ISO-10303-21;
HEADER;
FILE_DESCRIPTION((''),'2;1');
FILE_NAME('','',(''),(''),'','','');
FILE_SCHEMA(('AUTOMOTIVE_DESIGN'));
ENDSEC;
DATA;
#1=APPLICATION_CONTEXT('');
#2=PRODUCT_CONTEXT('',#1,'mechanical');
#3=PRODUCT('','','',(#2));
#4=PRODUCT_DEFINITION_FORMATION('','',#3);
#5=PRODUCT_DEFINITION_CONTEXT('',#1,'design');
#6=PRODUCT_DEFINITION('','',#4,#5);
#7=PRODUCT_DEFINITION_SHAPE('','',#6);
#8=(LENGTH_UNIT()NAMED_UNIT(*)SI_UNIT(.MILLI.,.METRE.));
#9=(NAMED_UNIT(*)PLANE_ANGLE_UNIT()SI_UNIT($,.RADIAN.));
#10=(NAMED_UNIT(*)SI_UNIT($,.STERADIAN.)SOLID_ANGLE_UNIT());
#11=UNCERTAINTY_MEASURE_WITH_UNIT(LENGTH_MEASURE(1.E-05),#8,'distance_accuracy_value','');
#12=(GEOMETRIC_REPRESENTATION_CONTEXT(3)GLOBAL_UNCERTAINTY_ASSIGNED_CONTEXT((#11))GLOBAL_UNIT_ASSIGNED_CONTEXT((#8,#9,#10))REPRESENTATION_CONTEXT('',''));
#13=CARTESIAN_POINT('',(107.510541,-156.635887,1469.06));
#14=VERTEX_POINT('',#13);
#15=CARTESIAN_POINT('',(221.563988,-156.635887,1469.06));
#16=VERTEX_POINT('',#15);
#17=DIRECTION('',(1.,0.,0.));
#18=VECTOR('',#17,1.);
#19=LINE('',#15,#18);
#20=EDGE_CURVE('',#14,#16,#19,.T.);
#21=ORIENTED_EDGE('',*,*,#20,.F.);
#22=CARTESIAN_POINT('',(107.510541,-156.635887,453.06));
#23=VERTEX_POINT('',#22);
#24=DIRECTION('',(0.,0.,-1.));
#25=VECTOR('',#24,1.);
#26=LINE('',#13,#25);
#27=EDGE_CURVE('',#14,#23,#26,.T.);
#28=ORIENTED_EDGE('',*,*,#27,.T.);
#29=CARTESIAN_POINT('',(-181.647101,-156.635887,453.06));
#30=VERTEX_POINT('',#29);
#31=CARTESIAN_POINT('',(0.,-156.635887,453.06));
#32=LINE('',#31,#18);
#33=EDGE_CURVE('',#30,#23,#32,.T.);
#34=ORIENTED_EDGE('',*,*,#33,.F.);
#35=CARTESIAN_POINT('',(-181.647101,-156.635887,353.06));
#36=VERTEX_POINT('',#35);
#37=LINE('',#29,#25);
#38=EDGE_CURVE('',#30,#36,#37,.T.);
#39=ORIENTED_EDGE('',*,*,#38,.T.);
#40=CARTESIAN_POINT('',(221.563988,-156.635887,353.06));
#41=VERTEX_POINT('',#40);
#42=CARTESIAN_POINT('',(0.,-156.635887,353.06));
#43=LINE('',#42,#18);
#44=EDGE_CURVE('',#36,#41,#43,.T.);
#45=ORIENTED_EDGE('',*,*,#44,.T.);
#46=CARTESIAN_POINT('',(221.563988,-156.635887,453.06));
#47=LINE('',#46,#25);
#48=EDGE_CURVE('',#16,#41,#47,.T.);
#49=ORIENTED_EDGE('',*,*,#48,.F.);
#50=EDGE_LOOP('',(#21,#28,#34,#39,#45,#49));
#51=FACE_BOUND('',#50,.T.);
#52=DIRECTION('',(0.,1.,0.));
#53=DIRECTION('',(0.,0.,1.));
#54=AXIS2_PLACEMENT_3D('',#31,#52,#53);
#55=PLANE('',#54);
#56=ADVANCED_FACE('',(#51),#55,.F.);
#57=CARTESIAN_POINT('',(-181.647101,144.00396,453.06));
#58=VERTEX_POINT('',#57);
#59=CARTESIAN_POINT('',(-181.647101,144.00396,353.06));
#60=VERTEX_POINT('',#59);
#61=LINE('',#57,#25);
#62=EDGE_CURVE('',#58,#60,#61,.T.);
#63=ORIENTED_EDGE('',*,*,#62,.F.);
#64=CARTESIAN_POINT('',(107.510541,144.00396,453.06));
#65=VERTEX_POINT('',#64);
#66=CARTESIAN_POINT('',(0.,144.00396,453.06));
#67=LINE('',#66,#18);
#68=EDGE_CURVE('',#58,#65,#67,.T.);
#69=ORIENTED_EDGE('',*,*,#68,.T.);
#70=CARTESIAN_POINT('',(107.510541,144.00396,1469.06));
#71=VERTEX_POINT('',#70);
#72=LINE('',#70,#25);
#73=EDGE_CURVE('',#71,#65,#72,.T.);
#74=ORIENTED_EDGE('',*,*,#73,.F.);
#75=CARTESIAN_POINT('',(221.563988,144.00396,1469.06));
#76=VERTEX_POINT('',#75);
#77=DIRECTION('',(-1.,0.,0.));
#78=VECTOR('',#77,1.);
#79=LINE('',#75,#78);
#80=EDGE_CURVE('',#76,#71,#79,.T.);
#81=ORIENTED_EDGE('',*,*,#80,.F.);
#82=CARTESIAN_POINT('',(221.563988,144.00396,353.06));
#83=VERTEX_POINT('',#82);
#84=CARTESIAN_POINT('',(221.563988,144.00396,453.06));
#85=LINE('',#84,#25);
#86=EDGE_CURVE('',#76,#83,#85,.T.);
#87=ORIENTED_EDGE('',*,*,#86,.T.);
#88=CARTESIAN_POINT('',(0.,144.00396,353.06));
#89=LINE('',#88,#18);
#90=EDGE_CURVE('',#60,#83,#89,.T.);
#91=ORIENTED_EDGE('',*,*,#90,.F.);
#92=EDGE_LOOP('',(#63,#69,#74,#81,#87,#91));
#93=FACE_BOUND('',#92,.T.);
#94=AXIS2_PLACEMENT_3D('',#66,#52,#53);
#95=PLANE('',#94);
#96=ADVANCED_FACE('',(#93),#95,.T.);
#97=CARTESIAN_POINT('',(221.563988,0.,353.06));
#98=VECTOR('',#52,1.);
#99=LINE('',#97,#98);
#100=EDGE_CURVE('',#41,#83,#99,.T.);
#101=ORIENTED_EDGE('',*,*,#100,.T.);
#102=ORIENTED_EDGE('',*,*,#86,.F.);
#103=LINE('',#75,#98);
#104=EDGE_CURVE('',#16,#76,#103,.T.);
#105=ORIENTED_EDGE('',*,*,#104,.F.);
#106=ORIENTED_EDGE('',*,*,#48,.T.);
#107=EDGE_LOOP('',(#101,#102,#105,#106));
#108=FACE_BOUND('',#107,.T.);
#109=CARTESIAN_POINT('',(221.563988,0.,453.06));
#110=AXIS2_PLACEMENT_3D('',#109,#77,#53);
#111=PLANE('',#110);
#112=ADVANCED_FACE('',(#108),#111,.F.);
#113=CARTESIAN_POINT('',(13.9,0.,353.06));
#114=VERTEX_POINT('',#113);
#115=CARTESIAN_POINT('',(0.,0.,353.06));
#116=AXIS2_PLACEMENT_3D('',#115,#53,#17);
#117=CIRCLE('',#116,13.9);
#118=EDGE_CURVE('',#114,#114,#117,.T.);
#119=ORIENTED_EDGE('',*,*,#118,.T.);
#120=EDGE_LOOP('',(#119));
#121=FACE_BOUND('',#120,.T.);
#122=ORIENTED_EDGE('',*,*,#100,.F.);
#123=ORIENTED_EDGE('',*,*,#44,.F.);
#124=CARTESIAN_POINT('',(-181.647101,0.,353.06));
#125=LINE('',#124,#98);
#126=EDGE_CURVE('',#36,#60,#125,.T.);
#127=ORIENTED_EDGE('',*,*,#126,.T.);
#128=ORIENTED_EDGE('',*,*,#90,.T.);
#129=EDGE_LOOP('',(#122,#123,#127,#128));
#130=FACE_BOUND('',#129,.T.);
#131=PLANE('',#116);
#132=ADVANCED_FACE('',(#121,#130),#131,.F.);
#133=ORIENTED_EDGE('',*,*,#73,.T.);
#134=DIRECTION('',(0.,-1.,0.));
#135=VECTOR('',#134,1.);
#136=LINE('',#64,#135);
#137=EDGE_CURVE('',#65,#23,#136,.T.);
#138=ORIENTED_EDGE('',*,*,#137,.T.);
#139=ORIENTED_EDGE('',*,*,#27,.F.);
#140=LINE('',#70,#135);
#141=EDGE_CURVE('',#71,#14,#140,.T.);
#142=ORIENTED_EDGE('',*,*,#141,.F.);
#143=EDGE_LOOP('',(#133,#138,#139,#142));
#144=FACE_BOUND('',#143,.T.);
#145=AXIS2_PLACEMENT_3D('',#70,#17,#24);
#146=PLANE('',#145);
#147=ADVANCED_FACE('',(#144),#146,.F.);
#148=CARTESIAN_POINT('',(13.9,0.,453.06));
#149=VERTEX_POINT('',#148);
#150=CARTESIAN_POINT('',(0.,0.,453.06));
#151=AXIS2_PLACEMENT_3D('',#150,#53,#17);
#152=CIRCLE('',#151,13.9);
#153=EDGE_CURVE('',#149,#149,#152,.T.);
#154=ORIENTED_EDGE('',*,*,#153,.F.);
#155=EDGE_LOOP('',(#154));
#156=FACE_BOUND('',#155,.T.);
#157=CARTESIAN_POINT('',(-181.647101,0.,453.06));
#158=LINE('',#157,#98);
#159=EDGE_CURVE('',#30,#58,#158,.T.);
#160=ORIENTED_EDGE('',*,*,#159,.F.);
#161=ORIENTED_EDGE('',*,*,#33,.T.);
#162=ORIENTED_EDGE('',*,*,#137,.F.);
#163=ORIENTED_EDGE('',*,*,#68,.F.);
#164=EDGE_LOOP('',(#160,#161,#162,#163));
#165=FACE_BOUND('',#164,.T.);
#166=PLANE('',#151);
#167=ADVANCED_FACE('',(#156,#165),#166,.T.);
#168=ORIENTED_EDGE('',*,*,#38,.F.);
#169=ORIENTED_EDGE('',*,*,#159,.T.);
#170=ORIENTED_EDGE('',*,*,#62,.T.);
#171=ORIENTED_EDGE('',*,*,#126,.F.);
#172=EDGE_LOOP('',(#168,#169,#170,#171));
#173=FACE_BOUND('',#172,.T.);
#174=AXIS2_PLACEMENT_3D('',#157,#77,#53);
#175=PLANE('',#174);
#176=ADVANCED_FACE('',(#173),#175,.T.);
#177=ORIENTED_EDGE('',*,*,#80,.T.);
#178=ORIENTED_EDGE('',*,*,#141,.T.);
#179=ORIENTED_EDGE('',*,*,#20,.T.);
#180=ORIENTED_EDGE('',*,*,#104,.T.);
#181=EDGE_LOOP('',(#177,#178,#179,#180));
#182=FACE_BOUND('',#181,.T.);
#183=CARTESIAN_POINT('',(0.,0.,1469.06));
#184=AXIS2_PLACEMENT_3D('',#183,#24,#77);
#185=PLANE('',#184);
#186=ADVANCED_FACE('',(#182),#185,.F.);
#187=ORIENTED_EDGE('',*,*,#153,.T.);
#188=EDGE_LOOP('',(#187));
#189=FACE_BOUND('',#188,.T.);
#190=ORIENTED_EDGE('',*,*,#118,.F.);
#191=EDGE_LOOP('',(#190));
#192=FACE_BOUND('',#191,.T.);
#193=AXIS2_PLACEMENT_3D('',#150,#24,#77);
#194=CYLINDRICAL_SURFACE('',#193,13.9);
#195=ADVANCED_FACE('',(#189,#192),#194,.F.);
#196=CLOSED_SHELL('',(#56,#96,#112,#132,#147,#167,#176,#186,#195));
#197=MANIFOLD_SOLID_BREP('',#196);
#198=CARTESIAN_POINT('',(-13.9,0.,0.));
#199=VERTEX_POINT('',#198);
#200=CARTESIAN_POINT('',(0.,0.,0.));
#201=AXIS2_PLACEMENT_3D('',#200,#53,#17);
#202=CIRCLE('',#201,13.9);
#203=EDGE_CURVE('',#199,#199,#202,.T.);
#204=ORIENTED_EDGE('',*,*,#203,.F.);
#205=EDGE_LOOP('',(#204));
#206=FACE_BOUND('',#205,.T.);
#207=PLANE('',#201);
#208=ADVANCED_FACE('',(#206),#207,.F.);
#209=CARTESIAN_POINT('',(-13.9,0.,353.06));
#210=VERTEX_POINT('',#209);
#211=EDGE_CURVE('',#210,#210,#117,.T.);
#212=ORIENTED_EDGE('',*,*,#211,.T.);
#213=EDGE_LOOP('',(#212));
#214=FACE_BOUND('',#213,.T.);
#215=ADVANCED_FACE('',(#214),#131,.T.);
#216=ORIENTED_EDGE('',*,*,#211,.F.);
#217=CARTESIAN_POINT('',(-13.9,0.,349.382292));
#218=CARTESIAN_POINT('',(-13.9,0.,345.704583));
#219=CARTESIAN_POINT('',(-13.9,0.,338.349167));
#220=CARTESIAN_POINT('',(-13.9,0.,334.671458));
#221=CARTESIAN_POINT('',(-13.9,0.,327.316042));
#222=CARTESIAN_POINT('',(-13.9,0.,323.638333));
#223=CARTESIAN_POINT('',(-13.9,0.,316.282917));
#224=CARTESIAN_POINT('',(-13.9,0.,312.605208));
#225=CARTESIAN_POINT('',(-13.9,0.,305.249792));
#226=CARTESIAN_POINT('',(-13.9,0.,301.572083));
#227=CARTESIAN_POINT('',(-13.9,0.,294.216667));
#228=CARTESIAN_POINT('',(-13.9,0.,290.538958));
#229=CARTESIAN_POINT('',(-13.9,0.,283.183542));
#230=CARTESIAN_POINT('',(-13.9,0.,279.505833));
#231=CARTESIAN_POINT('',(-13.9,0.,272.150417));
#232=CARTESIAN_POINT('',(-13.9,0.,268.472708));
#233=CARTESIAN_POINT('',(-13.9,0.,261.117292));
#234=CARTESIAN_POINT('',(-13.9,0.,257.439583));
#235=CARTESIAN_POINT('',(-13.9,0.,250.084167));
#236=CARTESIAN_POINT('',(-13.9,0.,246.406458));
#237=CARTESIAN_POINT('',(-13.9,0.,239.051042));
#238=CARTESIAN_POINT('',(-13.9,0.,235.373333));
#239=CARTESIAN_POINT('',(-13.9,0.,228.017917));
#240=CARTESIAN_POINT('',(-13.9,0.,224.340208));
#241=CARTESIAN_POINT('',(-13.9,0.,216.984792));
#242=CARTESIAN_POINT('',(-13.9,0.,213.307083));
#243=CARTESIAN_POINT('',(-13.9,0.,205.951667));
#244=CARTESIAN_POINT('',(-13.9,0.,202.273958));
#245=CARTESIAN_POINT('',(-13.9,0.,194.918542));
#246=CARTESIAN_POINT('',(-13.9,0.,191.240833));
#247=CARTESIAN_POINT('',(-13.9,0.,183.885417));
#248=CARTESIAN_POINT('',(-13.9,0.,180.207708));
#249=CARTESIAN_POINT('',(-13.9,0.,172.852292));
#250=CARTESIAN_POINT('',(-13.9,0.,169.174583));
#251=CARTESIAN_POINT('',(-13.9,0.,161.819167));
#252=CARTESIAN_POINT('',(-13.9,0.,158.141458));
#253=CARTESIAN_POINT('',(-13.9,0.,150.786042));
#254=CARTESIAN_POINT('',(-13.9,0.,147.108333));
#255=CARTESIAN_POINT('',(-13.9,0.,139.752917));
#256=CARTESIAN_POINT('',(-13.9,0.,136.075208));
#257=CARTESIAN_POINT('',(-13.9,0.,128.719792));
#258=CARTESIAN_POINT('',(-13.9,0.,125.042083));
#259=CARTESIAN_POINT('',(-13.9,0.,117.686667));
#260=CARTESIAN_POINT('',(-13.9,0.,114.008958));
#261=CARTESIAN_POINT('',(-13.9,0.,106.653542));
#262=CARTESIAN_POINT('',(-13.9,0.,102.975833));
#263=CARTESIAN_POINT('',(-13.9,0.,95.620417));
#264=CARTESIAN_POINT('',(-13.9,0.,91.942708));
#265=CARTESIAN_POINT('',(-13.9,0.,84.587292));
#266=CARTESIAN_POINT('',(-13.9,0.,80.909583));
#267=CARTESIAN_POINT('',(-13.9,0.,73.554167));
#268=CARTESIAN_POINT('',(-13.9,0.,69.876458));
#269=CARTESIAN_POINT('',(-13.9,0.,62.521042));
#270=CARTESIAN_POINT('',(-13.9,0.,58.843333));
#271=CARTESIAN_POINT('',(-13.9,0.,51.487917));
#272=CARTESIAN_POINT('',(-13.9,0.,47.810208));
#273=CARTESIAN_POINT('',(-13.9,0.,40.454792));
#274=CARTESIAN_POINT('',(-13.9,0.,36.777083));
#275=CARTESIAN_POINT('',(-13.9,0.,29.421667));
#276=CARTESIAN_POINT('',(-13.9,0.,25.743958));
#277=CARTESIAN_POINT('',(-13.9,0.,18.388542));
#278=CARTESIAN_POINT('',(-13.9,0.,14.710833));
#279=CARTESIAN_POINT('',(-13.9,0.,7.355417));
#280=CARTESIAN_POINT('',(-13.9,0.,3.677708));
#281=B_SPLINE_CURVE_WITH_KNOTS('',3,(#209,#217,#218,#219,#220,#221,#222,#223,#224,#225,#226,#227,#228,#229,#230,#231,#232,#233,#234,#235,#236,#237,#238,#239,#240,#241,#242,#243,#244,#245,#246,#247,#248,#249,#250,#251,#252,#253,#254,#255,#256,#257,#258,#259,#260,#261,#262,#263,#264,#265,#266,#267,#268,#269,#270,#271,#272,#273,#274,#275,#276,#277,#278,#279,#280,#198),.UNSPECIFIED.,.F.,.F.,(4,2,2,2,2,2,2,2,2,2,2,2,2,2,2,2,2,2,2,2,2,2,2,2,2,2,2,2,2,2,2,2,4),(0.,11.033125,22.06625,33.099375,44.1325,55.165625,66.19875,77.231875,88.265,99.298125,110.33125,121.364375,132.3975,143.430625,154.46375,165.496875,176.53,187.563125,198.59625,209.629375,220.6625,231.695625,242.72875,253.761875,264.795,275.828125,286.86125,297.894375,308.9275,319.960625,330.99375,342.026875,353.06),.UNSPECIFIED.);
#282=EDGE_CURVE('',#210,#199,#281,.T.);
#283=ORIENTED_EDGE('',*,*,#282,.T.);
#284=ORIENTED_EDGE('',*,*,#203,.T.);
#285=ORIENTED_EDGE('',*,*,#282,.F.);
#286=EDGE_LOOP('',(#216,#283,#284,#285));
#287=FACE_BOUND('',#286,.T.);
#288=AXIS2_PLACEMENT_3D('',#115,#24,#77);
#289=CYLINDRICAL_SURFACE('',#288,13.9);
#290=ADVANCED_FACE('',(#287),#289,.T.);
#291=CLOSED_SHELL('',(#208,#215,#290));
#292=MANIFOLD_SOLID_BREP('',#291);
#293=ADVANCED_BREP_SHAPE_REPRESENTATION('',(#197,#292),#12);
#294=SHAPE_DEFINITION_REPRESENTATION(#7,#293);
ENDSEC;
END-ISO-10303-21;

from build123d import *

# Parameters (mm, degrees)
SKETCH1_R           = 1.39
BOSS_EXTRUDE1_DEPTH = 35.306
SKETCH2_W           = 40.321108922
SKETCH2_H           = 30.063984723
SKETCH2_R           = 1.39
BOSS_EXTRUDE2_DEPTH = 10
SKETCH3_W           = 11.405344709
SKETCH3_H           = 30.063984723
BOSS_EXTRUDE3_DEPTH = 101.6
SCALE2_SCALE        = 10


with BuildPart() as part:
    # Sketch1 → Boss-Extrude1 (new body)
    with BuildSketch(Plane.XY):
        Circle(SKETCH1_R)
    extrude(amount=BOSS_EXTRUDE1_DEPTH)


with BuildPart() as body_2:
    # Sketch2 → Boss-Extrude2 (new body)
    with BuildSketch(Plane.XY.offset(35.306)):
        with Locations((1.995844364, -0.631596318)):
            Rectangle(SKETCH2_W, SKETCH2_H)
        Circle(SKETCH2_R, mode=Mode.SUBTRACT)
    extrude(amount=BOSS_EXTRUDE2_DEPTH)

    # Sketch3 → Boss-Extrude3 (add)
    with BuildSketch(Plane.XY.offset(45.306)):
        with Locations((16.453726471, -0.631596318)):
            Rectangle(SKETCH3_W, SKETCH3_H)
    extrude(amount=BOSS_EXTRUDE3_DEPTH)


with BuildPart() as body_2_1:
    # Scale2: scaled about (0, 0, 0)
    add(body_2.part.scale(SCALE2_SCALE))


with BuildPart() as part_1:
    # Scale2: scaled about (0, 0, 0)
    add(part.part.scale(SCALE2_SCALE))


solid = Compound([body_2_1.part, part_1.part])
